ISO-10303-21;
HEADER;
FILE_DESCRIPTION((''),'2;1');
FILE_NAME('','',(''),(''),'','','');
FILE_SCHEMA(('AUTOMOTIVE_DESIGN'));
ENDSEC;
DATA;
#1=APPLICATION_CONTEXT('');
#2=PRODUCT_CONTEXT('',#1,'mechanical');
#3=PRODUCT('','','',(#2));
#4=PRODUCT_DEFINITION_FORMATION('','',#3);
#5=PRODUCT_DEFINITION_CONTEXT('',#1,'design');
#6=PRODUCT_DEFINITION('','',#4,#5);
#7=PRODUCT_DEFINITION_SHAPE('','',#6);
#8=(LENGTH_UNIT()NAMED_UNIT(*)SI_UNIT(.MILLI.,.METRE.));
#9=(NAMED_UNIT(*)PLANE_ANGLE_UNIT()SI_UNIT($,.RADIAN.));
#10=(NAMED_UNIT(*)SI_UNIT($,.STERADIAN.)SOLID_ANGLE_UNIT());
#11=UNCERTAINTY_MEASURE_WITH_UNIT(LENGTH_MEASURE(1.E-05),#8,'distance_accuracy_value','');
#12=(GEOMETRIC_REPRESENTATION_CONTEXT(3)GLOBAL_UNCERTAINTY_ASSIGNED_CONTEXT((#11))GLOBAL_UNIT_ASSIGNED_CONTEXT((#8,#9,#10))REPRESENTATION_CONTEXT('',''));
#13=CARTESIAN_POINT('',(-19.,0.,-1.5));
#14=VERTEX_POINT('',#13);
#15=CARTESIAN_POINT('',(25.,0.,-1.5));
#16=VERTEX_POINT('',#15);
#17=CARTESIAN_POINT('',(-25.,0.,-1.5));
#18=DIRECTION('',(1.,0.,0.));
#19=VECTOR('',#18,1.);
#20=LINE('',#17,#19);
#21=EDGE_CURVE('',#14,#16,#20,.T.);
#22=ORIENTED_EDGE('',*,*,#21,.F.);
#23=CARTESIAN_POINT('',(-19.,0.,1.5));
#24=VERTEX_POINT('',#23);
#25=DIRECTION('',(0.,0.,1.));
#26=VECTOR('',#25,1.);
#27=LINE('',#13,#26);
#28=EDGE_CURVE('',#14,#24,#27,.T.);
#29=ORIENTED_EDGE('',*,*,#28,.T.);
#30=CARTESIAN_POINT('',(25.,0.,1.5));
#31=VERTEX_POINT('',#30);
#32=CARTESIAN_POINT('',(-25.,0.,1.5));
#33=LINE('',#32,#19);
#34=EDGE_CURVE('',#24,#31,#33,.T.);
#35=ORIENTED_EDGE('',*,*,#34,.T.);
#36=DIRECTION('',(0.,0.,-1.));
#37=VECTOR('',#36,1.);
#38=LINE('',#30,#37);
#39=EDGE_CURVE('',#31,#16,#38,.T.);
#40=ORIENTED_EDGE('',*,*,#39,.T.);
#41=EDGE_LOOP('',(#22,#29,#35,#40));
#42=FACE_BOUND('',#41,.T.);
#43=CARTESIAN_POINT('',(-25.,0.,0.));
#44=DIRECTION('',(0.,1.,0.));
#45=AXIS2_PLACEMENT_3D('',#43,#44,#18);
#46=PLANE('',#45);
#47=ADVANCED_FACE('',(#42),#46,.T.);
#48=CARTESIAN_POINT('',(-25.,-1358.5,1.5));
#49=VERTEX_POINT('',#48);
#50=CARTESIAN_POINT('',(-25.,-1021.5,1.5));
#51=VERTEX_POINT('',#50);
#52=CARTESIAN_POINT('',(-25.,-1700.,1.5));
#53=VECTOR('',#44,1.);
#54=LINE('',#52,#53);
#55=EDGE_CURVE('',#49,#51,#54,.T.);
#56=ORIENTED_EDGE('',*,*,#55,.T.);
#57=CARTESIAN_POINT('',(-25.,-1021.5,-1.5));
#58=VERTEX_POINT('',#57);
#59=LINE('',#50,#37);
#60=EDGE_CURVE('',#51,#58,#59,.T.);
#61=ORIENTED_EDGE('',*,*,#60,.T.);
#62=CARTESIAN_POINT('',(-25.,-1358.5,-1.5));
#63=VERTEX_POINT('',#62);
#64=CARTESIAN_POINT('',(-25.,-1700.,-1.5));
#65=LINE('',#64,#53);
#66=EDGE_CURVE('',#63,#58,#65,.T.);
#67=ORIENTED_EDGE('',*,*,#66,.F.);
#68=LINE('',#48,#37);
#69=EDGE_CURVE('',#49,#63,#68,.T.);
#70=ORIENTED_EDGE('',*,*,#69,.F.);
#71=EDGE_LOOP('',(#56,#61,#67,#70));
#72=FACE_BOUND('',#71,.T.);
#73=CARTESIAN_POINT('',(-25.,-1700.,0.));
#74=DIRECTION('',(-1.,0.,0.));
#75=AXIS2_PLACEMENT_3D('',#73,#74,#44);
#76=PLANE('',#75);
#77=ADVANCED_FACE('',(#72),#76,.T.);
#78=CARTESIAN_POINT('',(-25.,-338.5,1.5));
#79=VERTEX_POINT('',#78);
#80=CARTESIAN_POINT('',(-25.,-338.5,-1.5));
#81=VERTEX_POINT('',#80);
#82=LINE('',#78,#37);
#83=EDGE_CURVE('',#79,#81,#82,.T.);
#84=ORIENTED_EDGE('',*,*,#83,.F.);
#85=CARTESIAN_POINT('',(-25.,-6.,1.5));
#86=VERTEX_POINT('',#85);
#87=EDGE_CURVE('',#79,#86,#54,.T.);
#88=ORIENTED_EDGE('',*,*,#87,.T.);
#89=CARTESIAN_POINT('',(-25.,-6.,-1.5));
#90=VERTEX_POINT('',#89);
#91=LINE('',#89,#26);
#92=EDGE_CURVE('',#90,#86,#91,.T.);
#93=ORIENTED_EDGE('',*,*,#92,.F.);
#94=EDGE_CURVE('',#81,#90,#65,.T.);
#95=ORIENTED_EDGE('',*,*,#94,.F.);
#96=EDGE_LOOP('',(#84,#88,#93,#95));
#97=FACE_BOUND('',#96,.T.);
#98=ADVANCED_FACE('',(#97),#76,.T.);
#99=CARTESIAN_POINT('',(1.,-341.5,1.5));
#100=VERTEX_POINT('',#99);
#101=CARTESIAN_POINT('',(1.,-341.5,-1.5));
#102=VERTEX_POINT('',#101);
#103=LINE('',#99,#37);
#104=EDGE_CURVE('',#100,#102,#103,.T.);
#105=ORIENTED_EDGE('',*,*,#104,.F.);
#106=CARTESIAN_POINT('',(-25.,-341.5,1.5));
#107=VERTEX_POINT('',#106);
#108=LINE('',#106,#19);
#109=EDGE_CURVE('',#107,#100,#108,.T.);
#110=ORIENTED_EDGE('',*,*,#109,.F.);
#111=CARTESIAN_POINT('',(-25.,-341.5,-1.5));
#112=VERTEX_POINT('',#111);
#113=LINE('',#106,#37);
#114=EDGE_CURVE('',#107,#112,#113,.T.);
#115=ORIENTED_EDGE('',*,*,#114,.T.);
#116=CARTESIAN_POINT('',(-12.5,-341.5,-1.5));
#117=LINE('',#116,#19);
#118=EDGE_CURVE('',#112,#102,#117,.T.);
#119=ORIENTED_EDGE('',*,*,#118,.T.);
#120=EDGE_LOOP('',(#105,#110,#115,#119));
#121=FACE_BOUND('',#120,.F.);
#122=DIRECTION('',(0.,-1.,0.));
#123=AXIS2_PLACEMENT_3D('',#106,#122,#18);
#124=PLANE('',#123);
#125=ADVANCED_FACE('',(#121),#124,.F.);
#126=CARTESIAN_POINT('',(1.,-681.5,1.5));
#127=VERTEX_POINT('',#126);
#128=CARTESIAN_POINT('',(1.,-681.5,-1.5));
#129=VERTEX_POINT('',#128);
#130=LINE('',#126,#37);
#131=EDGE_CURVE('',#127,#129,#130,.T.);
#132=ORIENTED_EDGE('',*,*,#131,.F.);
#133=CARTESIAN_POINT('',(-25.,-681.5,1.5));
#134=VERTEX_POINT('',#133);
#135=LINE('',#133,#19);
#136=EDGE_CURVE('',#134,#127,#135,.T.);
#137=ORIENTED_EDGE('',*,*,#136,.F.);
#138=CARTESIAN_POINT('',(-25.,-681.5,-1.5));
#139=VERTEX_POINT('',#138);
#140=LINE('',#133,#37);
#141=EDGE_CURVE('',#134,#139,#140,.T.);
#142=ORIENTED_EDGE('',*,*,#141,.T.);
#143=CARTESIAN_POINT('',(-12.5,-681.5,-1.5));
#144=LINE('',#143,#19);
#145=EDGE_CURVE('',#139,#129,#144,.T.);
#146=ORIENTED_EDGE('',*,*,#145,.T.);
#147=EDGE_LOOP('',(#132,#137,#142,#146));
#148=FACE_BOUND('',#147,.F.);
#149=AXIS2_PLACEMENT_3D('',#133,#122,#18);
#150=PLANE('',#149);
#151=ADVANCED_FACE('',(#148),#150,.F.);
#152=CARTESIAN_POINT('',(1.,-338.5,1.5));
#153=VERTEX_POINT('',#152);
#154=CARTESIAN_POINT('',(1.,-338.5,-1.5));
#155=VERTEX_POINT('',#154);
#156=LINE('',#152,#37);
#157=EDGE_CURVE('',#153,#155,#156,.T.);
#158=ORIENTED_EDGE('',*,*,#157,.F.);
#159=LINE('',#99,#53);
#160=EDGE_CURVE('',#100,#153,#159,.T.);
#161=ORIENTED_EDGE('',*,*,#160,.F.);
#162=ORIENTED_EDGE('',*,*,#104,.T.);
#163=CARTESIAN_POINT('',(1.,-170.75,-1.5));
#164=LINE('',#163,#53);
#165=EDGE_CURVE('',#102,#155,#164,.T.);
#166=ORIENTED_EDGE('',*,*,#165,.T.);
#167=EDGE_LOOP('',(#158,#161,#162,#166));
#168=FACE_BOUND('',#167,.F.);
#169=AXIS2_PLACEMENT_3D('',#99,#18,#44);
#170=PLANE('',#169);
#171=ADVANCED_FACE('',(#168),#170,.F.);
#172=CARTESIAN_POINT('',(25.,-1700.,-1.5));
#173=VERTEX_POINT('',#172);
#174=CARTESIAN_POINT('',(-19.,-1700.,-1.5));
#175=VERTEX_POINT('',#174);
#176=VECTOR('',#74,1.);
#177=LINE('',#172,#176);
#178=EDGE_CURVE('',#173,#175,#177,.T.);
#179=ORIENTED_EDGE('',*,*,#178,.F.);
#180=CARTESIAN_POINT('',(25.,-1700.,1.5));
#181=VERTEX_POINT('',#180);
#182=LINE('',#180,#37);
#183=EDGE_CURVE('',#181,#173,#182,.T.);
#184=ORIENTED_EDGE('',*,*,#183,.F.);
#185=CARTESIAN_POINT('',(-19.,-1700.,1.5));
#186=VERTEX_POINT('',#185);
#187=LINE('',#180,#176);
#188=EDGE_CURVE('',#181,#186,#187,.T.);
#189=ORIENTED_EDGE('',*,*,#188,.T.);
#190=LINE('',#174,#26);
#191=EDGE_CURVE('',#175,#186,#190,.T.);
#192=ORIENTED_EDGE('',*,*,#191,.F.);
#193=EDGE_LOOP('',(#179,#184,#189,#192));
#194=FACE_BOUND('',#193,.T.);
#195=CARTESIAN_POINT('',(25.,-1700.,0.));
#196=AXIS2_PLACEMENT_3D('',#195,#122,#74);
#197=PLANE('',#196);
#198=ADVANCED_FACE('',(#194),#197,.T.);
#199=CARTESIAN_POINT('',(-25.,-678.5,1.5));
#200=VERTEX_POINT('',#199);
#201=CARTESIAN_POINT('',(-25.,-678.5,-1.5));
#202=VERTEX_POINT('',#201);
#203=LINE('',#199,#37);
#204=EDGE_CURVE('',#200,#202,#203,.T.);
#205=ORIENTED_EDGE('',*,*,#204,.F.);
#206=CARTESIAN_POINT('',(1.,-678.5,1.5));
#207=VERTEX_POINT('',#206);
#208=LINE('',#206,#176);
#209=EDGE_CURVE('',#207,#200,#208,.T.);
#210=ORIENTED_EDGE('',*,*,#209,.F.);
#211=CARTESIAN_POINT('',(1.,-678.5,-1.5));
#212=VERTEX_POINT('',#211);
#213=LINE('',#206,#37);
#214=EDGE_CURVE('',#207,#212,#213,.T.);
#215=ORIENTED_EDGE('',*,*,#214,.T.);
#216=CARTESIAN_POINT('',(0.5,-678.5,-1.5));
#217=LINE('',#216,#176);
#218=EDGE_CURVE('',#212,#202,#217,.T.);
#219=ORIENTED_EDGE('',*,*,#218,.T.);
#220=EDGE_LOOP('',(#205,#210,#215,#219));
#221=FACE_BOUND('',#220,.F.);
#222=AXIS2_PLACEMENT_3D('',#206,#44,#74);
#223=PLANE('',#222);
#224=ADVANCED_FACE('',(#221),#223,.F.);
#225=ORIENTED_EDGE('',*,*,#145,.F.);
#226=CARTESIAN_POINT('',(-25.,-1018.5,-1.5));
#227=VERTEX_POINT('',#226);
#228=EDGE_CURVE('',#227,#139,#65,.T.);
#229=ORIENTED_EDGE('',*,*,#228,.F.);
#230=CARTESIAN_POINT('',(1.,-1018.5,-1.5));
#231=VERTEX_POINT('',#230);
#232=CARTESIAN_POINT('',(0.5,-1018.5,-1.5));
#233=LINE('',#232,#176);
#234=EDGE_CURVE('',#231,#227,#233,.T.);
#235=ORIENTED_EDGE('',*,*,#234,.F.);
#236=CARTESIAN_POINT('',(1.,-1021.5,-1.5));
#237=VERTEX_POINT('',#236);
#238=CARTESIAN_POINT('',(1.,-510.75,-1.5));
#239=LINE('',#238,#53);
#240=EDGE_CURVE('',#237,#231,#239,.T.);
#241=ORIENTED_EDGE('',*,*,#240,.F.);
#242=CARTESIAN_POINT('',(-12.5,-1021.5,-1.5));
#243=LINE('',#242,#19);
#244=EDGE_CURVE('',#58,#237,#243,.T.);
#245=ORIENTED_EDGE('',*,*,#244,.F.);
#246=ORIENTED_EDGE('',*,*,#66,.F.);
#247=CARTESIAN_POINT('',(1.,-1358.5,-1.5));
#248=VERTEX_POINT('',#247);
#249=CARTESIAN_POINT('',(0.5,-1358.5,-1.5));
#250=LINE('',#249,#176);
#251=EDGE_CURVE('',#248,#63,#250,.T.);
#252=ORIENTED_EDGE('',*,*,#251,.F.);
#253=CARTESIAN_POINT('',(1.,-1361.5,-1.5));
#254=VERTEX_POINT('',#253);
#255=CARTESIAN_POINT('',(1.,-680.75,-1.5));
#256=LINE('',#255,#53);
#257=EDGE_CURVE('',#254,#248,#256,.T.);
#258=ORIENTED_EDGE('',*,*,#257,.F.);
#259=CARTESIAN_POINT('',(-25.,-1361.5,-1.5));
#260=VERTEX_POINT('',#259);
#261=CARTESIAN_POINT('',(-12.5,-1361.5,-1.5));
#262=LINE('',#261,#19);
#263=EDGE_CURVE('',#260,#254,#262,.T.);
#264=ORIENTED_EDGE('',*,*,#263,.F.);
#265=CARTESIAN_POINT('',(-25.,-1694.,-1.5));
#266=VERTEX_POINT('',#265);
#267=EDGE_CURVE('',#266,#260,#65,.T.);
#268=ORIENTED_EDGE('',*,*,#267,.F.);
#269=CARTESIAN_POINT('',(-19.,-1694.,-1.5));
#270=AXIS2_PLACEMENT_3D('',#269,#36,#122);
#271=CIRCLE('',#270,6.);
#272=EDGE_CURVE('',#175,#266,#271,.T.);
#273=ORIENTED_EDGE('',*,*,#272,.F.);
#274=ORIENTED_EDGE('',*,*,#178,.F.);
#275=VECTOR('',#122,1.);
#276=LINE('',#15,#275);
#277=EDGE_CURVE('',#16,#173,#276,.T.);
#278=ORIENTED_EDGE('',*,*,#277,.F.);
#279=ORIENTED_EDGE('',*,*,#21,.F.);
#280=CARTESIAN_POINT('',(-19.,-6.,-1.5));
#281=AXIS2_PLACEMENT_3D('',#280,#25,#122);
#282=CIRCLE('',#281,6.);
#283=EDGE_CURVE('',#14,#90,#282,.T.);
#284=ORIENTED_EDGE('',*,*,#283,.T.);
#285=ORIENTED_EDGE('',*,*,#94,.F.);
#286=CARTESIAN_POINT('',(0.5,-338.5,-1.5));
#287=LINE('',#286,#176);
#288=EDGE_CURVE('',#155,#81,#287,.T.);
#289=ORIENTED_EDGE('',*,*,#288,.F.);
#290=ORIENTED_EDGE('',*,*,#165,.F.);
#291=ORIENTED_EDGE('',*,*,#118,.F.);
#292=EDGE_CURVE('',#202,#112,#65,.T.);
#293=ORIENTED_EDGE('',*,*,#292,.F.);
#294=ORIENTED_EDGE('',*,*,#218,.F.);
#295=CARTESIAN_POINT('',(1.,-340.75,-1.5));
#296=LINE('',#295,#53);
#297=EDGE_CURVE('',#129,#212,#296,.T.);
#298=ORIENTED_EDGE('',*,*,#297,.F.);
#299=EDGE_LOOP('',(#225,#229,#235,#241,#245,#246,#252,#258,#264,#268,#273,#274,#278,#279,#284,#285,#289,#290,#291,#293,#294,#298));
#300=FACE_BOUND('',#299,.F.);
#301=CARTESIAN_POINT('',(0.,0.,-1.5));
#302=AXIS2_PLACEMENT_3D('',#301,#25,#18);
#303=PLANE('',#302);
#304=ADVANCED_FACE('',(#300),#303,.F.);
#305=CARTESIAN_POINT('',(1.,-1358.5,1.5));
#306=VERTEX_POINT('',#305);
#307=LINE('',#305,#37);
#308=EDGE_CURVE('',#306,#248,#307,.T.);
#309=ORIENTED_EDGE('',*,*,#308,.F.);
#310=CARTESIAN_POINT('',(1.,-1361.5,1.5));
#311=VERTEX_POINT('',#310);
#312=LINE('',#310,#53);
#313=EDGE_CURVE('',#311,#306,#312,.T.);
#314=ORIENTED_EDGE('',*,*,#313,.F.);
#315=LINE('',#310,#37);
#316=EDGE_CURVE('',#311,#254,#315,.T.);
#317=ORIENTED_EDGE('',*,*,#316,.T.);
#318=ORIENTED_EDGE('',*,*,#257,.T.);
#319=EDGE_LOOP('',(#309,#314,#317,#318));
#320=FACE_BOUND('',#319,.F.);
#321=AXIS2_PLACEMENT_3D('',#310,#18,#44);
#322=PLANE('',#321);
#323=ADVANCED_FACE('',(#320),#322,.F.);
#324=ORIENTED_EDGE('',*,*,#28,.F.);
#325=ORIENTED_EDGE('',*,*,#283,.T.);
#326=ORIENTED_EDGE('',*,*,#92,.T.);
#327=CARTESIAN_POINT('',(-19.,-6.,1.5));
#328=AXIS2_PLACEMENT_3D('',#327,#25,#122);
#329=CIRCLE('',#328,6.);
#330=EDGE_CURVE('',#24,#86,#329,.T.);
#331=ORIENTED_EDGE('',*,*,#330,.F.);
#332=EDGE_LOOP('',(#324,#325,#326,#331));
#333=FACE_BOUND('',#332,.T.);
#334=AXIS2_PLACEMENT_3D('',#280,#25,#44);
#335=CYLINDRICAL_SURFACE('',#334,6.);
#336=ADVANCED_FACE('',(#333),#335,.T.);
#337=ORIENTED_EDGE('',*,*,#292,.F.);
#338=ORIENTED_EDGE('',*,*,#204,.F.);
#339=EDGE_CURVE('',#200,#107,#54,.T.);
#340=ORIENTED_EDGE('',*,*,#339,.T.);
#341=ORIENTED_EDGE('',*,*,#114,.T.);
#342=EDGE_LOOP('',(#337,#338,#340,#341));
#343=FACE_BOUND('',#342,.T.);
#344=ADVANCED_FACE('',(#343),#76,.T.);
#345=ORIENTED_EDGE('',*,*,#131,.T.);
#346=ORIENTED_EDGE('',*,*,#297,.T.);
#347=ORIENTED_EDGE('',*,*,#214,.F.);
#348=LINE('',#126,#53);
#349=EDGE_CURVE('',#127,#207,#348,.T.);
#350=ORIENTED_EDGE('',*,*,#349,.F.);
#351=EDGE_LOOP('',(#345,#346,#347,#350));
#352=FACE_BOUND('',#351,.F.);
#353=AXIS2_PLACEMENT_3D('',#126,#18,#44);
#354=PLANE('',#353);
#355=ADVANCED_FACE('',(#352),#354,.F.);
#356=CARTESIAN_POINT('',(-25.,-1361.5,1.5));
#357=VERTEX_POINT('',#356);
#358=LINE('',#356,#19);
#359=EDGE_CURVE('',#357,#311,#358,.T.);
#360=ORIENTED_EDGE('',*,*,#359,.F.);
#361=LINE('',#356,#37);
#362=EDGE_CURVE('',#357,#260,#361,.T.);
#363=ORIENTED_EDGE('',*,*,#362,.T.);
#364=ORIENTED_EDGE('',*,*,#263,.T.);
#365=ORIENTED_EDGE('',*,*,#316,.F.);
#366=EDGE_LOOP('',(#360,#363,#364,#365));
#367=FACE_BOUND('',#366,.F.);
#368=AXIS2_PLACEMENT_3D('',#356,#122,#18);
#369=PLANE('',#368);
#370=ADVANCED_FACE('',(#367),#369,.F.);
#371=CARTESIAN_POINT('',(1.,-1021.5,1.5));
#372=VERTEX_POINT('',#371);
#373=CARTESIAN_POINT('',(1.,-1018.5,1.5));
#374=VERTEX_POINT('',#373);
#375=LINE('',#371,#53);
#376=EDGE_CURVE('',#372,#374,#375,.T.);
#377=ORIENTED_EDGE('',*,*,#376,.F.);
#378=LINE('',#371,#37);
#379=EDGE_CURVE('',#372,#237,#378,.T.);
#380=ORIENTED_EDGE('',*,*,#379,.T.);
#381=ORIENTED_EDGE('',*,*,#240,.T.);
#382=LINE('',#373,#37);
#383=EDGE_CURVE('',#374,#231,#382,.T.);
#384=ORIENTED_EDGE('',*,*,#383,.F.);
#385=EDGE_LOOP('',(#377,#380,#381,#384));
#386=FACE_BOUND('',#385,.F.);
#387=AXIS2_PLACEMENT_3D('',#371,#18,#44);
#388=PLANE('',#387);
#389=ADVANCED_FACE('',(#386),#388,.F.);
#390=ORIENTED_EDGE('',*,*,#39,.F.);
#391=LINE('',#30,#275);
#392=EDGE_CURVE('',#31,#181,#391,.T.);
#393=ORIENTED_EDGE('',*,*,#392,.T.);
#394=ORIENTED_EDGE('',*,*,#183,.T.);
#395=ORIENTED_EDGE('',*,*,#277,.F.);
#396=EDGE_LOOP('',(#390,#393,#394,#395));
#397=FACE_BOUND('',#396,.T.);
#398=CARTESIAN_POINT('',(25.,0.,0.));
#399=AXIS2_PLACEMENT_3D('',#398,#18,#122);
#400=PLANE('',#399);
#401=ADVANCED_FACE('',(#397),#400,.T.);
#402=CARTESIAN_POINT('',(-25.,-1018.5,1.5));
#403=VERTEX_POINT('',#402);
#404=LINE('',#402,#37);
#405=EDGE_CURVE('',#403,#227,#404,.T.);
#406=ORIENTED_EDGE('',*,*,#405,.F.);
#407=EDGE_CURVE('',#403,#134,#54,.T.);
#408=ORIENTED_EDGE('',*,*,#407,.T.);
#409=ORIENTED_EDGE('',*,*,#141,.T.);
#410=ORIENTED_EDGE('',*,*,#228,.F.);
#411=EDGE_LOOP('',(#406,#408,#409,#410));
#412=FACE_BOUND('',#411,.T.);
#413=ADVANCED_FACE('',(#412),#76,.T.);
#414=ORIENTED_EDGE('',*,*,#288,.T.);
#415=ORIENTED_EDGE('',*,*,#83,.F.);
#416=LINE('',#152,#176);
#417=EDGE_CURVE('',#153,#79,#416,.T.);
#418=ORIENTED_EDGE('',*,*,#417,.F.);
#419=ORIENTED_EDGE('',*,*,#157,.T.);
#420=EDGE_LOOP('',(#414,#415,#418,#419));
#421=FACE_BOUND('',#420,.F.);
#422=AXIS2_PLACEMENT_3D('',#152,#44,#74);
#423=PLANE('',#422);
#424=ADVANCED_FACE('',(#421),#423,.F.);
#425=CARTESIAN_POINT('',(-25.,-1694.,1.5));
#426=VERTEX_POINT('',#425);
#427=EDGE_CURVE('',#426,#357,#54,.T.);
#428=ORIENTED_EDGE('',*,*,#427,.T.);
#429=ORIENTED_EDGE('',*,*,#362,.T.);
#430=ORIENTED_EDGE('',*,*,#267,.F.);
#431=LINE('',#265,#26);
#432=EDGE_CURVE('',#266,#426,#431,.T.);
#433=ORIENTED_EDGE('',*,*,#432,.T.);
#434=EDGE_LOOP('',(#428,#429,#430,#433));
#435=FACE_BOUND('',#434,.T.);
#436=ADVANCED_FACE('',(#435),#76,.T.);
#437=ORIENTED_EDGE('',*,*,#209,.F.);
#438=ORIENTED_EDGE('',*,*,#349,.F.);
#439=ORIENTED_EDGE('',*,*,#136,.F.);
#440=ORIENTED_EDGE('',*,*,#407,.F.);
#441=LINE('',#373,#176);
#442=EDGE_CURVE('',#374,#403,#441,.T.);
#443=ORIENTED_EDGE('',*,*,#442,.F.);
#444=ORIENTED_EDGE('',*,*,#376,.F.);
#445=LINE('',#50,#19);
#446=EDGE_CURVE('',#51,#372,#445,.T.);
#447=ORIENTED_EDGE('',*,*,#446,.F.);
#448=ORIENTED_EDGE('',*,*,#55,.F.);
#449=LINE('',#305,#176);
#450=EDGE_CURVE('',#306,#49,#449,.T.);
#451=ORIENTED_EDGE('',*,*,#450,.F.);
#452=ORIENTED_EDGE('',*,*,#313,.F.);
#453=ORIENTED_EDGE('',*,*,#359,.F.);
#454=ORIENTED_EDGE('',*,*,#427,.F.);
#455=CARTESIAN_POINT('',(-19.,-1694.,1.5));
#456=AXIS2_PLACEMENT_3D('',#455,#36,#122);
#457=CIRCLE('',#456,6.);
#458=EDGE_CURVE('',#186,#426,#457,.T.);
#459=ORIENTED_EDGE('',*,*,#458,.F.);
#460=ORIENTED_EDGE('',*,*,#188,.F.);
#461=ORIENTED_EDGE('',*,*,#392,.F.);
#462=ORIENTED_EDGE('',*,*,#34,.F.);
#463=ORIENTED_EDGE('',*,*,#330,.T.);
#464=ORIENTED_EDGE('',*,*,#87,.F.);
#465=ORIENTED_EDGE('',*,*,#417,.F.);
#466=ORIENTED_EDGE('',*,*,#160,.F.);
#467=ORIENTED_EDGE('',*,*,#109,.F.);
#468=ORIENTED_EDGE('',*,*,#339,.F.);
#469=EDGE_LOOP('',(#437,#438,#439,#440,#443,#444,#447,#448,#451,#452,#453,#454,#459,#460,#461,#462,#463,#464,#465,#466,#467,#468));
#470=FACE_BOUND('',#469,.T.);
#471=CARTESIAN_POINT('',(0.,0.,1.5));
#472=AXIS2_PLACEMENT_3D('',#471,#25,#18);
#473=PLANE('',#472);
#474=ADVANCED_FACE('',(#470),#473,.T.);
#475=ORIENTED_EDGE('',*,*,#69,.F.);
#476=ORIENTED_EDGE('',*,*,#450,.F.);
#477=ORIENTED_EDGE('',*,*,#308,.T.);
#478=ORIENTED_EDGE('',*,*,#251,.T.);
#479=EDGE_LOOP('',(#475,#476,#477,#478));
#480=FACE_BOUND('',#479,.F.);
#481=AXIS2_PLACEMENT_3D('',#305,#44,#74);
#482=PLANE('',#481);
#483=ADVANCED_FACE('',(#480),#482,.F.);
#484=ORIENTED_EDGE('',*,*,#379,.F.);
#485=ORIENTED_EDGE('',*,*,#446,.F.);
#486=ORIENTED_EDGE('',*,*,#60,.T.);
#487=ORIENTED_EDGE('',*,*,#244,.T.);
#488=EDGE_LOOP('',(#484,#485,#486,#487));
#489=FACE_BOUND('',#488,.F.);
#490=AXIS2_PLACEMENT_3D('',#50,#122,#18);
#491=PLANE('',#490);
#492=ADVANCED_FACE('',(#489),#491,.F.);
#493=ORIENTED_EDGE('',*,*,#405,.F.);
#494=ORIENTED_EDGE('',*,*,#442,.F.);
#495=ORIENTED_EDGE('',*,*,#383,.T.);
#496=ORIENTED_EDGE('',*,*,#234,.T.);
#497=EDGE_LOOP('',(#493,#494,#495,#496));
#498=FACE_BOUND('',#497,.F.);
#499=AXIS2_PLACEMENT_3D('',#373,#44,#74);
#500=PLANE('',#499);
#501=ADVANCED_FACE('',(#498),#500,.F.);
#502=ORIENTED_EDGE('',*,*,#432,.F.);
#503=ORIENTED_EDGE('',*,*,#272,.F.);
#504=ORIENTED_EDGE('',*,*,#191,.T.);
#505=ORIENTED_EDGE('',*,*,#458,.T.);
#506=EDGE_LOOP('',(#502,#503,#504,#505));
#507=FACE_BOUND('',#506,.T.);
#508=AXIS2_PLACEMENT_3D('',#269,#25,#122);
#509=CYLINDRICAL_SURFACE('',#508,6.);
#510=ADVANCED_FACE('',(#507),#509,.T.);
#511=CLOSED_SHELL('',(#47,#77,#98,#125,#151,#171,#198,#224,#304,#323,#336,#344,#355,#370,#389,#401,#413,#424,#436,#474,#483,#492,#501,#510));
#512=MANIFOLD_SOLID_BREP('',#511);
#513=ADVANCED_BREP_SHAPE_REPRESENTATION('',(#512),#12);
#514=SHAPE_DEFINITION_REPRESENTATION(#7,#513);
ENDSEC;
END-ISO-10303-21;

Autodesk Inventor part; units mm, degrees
ref_plane "YZ Plane" through (0, 0, 0) normal (1, 0, 0) x (0, 1, 0)
ref_plane "XZ Plane" through (0, 0, 0) normal (0, 1, 0) x (-1, 0, 0)
ref_plane "XY Plane" through (0, 0, 0) normal (0, 0, 1) x (1, 0, 0)
sketch "Sketch1" plane through (0, 0, 0) normal (0, 0, 1) x (1, 0, 0)
  line L0 (-25, 0) -> (25, 0)
  line L1 (25, 0) -> (25, -1700)
  line L2 (25, -1700) -> (-25, -1700)
  line L3 (-25, -1700) -> (-25, 0)
  point P0 (0, 0)
  point P1 (0, 0)
  point P2 (-25, -1153.2713)
  dimension "d0" = 50
  dimension "d1" = 1700
extrude "Plate1" add sketch "Sketch1" along normal mid plane 3
sketch "Sketch2" plane through (0, 0, 1.5) normal (0, 0, 1) x (1, 0, 0)
  line L0 (-25, -1021.5) -> (1, -1021.5)
  line L1 (1, -1021.5) -> (1, -1018.5)
  line L2 (1, -1018.5) -> (-25, -1018.5)
  line L3 (-25, -1018.5) -> (-25, -1021.5)
  line L4 (-25, -1700) -> (-25, 0) projected
  line L5 (-25, -1361.5) -> (1, -1361.5)
  line L6 (1, -1361.5) -> (1, -1358.5)
  line L7 (1, -1358.5) -> (-25, -1358.5)
  line L8 (-25, -1358.5) -> (-25, -1361.5)
  line L9 (-25, -681.5) -> (1, -681.5)
  line L10 (1, -681.5) -> (1, -678.5)
  line L11 (1, -678.5) -> (-25, -678.5)
  line L12 (-25, -678.5) -> (-25, -681.5)
  line L13 (-25, -341.5) -> (1, -341.5)
  line L14 (1, -341.5) -> (1, -338.5)
  line L15 (1, -338.5) -> (-25, -338.5)
  line L16 (-25, -338.5) -> (-25, -341.5)
  point P0 (0, 0)
  point P1 (-25, -1020)
  point P2 (-25, -850)
  point P3 (-25, -1360)
  point P4 (-25, -680)
  point P5 (-25, -850)
  point P6 (-25, -340)
  point P7 (-25, -338.5)
  point P8 (-25, -341.5)
  point P9 (-25, -678.5)
  point P10 (-25, -681.5)
  point P11 (-25, -1358.5)
  point P12 (-25, -1361.5)
  dimension "d15" = 26
  dimension "d16" = 3
  dimension "d17" = 170
  dimension "d20" = 26
  dimension "d21" = 3
  dimension "d22" = 340
  dimension "d23" = 26
  dimension "d24" = 3
  dimension "d25" = 170
  dimension "d26" = 340
  dimension "d27" = 3
  dimension "d28" = 26
extrude "Extrusion1" cut sketch "Sketch2" against normal through all
fillet "Corner Round3" radius 6 2 edges at (-25, 0, 0) (-25, -1700, 0)
sketch "Sketch3" plane through (0, 0, 1.5) normal (0, 0, 1) x (1, 0, 0)
  line L0 (-5.1757, -47.7196) -> (3.8521, -47.7196) construction
  line L1 (3.8521, -47.7196) -> (3.8521, -156.6657) construction
  line L2 (3.8521, -156.6657) -> (-5.1757, -156.6657) construction
  line L3 (-5.1757, -156.6657) -> (-5.1757, -47.7196) construction
  point P0 (0, 0)
mark "Mark1"
equation "\"d17\" = d25"
equation "\"d20\" = d15"
equation "\"d21\" = d16"
equation "\"d22\" = d26"
equation "\"d23\" = d15"
equation "\"d24\" = d16"
equation "\"d27\" = d24"
equation "\"d28\" = d23"
equation "\"d2\" = Thickness"
equation "\"BendReliefWidth\" = Thickness"
equation "\"BendReliefDepth\" = 0.5 * Thickness"
equation "\"CornerReliefSize\" = 4 * Thickness"
equation "\"MinimumRemnant\" = 2 * Thickness"
equation "\"TransitionRadius\" = BendRadius"
equation "\"JacobiRadiusSize\" = BendRadius"
equation "\"GapSize\" = Thickness"
equation "\"Thickness\" = 3"
equation "\"BendRadius\" = 5"
properties part number "MSC 604 RIB CONE EXIT BACK" material "Stainless Steel"
